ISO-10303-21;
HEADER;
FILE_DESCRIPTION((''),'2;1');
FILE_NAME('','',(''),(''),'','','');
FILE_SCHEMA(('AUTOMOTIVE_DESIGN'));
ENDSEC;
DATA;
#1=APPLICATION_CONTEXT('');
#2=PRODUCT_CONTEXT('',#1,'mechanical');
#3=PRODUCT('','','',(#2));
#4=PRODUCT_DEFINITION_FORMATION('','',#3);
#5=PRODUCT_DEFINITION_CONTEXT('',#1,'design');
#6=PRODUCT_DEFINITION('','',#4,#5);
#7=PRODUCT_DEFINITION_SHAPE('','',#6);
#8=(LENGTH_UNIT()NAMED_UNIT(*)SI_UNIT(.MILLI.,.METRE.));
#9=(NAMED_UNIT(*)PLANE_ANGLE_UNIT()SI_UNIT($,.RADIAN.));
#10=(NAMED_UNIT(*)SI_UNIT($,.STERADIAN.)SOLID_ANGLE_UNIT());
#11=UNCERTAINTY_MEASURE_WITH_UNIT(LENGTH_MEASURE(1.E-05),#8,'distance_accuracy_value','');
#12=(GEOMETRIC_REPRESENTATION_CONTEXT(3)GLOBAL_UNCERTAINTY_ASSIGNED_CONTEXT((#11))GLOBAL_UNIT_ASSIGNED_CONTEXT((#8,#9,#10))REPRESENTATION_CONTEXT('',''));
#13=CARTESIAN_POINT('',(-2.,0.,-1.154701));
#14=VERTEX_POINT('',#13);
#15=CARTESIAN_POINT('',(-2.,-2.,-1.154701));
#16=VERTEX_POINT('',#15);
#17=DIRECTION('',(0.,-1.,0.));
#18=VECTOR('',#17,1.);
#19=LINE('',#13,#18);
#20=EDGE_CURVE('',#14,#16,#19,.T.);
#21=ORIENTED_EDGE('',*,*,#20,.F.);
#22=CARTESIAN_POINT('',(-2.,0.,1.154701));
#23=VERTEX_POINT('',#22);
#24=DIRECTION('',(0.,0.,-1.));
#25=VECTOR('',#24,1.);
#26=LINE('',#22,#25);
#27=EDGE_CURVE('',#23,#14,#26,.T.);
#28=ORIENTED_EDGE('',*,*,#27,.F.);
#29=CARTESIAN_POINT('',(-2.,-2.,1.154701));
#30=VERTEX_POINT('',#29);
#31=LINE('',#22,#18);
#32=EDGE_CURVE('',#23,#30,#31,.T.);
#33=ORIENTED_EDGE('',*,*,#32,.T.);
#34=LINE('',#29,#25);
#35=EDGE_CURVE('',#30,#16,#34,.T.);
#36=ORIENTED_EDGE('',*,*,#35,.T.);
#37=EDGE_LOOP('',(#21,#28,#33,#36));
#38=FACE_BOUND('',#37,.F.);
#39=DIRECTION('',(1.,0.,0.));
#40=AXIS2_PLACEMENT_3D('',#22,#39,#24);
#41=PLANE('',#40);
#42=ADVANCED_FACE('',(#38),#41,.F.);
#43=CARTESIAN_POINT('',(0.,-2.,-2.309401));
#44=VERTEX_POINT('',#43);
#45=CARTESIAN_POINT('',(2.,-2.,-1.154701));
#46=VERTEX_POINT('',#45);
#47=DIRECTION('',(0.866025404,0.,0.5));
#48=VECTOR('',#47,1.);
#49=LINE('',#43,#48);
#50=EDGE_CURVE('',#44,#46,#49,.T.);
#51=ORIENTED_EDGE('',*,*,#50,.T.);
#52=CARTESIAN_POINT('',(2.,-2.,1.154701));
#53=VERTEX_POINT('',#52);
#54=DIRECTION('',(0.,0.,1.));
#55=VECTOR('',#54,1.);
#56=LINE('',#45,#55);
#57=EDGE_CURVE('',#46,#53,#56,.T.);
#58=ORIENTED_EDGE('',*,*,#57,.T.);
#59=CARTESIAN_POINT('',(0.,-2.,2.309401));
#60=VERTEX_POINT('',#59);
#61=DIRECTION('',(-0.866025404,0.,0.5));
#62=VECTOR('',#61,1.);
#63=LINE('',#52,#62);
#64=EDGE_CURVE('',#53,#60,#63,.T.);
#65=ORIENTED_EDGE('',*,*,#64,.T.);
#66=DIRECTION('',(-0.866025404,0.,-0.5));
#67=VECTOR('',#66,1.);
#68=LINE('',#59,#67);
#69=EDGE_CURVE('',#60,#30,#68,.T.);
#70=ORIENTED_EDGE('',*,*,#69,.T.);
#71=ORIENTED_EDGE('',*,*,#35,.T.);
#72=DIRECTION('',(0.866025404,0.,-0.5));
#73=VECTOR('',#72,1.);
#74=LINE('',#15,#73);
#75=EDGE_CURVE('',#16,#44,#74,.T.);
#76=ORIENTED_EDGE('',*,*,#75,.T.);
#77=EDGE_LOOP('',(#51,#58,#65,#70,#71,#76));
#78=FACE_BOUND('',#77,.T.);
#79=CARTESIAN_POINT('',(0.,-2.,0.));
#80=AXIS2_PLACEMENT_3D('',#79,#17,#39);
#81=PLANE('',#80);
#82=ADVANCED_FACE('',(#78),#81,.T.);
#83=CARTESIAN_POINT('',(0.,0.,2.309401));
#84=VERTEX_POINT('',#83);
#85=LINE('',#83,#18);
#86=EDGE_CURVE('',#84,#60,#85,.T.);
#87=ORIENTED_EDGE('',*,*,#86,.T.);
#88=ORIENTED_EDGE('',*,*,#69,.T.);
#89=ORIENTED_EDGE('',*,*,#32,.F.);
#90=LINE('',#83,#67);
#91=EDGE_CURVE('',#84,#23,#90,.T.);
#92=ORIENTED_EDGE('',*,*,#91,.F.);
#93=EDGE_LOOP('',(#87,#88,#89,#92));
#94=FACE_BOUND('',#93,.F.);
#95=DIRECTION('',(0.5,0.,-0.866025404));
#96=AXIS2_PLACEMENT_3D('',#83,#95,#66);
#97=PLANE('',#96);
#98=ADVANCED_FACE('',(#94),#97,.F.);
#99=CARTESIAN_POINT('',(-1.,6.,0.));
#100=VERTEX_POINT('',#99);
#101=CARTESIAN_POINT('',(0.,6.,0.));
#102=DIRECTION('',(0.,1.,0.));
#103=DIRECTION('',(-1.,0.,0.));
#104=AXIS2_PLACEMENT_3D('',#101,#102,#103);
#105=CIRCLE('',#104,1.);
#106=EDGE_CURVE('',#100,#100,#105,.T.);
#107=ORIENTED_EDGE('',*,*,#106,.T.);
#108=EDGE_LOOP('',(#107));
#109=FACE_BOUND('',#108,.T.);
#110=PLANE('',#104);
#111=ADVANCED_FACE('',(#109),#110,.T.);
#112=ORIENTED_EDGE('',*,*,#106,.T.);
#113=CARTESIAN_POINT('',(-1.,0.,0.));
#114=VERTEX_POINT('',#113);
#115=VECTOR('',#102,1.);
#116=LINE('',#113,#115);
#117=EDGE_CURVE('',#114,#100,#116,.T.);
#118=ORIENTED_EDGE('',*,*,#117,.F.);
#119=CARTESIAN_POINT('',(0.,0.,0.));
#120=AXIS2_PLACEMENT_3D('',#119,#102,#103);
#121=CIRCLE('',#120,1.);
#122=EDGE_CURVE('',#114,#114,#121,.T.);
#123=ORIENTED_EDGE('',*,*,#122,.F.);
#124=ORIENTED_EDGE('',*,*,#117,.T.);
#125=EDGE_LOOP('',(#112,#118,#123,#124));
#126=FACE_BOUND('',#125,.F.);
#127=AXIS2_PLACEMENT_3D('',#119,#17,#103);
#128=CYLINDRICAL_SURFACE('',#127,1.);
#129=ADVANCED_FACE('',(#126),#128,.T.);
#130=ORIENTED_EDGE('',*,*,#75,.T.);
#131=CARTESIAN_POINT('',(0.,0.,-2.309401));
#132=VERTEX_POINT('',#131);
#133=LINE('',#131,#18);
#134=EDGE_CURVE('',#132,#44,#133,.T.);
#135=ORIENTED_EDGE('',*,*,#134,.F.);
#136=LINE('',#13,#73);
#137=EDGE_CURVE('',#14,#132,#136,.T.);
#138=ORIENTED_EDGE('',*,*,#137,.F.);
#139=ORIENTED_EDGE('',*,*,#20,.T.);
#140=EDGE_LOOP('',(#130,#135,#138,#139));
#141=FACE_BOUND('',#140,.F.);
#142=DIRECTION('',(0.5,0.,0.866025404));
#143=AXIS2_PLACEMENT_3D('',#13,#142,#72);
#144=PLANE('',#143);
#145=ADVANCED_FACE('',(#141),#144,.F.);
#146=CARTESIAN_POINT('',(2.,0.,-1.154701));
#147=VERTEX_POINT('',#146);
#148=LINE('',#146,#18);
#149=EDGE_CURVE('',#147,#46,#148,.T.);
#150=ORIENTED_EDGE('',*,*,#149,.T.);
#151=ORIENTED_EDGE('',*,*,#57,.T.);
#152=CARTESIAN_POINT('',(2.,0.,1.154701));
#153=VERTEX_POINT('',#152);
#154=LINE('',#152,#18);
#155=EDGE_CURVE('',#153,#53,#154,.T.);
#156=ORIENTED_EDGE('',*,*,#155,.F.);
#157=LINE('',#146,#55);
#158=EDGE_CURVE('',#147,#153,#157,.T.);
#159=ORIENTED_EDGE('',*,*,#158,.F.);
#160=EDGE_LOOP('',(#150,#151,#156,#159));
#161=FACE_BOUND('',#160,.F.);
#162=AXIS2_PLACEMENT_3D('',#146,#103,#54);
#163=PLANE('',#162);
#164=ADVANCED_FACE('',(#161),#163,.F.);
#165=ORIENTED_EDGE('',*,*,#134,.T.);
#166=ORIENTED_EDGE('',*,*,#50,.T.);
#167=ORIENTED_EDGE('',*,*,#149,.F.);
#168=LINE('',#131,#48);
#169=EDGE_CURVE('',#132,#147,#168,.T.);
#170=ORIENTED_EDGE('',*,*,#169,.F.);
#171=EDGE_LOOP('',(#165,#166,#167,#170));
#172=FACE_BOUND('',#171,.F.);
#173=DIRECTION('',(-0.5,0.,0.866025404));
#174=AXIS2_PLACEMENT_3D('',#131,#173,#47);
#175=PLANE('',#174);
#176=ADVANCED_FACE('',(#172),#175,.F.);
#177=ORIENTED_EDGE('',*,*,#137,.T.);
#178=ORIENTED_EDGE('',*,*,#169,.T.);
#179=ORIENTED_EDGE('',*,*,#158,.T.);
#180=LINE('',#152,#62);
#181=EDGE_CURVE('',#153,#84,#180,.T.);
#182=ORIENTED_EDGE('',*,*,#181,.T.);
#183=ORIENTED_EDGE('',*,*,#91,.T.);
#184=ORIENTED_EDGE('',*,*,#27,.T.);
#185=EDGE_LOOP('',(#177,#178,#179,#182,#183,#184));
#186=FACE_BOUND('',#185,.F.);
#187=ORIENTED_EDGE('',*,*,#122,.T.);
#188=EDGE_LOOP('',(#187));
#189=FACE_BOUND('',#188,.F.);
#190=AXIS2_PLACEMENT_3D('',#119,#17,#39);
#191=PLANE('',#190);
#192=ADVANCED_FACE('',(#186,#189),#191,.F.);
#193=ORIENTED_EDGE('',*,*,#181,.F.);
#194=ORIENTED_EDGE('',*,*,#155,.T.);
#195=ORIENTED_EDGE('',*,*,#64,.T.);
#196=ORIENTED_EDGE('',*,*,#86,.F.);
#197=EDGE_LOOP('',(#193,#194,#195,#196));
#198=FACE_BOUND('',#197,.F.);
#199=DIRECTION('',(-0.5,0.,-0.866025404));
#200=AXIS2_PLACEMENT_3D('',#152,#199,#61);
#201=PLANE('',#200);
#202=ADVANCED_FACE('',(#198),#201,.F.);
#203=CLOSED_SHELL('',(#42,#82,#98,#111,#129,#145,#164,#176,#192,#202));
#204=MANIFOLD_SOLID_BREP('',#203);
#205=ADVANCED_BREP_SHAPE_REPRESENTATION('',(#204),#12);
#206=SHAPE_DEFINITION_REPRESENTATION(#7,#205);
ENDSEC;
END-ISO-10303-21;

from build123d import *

# Parameters (mm, degrees)
F0_R     = 1
F1_DEPTH = 2
F2_R     = 1
F3_DEPTH = 6


# Not quite as in the source:
# - a feature of the source that left no trace in its solid (it failed there, or was rolled back) is left out


with BuildPart() as f1:
    # F0 (on Front) → F1 (new body)
    with BuildSketch(Plane.XZ):
        Polygon((-2, 1.1547005384), (-2, -1.1547005384), (0, -2.3094010768), (2, -1.1547005384), (2, 1.1547005384), (0, 2.3094010768), align=None)
        Circle(F0_R, mode=Mode.SUBTRACT)
        Circle(F0_R)
    extrude(amount=F1_DEPTH)

    # F2 (on face) → F3 (join)
    with BuildSketch(Plane(origin=(0, 0, 0), x_dir=(-1, 0, 0), z_dir=(0, 1, 0))):
        Circle(F2_R)
    extrude(amount=F3_DEPTH)


solid = f1.part
